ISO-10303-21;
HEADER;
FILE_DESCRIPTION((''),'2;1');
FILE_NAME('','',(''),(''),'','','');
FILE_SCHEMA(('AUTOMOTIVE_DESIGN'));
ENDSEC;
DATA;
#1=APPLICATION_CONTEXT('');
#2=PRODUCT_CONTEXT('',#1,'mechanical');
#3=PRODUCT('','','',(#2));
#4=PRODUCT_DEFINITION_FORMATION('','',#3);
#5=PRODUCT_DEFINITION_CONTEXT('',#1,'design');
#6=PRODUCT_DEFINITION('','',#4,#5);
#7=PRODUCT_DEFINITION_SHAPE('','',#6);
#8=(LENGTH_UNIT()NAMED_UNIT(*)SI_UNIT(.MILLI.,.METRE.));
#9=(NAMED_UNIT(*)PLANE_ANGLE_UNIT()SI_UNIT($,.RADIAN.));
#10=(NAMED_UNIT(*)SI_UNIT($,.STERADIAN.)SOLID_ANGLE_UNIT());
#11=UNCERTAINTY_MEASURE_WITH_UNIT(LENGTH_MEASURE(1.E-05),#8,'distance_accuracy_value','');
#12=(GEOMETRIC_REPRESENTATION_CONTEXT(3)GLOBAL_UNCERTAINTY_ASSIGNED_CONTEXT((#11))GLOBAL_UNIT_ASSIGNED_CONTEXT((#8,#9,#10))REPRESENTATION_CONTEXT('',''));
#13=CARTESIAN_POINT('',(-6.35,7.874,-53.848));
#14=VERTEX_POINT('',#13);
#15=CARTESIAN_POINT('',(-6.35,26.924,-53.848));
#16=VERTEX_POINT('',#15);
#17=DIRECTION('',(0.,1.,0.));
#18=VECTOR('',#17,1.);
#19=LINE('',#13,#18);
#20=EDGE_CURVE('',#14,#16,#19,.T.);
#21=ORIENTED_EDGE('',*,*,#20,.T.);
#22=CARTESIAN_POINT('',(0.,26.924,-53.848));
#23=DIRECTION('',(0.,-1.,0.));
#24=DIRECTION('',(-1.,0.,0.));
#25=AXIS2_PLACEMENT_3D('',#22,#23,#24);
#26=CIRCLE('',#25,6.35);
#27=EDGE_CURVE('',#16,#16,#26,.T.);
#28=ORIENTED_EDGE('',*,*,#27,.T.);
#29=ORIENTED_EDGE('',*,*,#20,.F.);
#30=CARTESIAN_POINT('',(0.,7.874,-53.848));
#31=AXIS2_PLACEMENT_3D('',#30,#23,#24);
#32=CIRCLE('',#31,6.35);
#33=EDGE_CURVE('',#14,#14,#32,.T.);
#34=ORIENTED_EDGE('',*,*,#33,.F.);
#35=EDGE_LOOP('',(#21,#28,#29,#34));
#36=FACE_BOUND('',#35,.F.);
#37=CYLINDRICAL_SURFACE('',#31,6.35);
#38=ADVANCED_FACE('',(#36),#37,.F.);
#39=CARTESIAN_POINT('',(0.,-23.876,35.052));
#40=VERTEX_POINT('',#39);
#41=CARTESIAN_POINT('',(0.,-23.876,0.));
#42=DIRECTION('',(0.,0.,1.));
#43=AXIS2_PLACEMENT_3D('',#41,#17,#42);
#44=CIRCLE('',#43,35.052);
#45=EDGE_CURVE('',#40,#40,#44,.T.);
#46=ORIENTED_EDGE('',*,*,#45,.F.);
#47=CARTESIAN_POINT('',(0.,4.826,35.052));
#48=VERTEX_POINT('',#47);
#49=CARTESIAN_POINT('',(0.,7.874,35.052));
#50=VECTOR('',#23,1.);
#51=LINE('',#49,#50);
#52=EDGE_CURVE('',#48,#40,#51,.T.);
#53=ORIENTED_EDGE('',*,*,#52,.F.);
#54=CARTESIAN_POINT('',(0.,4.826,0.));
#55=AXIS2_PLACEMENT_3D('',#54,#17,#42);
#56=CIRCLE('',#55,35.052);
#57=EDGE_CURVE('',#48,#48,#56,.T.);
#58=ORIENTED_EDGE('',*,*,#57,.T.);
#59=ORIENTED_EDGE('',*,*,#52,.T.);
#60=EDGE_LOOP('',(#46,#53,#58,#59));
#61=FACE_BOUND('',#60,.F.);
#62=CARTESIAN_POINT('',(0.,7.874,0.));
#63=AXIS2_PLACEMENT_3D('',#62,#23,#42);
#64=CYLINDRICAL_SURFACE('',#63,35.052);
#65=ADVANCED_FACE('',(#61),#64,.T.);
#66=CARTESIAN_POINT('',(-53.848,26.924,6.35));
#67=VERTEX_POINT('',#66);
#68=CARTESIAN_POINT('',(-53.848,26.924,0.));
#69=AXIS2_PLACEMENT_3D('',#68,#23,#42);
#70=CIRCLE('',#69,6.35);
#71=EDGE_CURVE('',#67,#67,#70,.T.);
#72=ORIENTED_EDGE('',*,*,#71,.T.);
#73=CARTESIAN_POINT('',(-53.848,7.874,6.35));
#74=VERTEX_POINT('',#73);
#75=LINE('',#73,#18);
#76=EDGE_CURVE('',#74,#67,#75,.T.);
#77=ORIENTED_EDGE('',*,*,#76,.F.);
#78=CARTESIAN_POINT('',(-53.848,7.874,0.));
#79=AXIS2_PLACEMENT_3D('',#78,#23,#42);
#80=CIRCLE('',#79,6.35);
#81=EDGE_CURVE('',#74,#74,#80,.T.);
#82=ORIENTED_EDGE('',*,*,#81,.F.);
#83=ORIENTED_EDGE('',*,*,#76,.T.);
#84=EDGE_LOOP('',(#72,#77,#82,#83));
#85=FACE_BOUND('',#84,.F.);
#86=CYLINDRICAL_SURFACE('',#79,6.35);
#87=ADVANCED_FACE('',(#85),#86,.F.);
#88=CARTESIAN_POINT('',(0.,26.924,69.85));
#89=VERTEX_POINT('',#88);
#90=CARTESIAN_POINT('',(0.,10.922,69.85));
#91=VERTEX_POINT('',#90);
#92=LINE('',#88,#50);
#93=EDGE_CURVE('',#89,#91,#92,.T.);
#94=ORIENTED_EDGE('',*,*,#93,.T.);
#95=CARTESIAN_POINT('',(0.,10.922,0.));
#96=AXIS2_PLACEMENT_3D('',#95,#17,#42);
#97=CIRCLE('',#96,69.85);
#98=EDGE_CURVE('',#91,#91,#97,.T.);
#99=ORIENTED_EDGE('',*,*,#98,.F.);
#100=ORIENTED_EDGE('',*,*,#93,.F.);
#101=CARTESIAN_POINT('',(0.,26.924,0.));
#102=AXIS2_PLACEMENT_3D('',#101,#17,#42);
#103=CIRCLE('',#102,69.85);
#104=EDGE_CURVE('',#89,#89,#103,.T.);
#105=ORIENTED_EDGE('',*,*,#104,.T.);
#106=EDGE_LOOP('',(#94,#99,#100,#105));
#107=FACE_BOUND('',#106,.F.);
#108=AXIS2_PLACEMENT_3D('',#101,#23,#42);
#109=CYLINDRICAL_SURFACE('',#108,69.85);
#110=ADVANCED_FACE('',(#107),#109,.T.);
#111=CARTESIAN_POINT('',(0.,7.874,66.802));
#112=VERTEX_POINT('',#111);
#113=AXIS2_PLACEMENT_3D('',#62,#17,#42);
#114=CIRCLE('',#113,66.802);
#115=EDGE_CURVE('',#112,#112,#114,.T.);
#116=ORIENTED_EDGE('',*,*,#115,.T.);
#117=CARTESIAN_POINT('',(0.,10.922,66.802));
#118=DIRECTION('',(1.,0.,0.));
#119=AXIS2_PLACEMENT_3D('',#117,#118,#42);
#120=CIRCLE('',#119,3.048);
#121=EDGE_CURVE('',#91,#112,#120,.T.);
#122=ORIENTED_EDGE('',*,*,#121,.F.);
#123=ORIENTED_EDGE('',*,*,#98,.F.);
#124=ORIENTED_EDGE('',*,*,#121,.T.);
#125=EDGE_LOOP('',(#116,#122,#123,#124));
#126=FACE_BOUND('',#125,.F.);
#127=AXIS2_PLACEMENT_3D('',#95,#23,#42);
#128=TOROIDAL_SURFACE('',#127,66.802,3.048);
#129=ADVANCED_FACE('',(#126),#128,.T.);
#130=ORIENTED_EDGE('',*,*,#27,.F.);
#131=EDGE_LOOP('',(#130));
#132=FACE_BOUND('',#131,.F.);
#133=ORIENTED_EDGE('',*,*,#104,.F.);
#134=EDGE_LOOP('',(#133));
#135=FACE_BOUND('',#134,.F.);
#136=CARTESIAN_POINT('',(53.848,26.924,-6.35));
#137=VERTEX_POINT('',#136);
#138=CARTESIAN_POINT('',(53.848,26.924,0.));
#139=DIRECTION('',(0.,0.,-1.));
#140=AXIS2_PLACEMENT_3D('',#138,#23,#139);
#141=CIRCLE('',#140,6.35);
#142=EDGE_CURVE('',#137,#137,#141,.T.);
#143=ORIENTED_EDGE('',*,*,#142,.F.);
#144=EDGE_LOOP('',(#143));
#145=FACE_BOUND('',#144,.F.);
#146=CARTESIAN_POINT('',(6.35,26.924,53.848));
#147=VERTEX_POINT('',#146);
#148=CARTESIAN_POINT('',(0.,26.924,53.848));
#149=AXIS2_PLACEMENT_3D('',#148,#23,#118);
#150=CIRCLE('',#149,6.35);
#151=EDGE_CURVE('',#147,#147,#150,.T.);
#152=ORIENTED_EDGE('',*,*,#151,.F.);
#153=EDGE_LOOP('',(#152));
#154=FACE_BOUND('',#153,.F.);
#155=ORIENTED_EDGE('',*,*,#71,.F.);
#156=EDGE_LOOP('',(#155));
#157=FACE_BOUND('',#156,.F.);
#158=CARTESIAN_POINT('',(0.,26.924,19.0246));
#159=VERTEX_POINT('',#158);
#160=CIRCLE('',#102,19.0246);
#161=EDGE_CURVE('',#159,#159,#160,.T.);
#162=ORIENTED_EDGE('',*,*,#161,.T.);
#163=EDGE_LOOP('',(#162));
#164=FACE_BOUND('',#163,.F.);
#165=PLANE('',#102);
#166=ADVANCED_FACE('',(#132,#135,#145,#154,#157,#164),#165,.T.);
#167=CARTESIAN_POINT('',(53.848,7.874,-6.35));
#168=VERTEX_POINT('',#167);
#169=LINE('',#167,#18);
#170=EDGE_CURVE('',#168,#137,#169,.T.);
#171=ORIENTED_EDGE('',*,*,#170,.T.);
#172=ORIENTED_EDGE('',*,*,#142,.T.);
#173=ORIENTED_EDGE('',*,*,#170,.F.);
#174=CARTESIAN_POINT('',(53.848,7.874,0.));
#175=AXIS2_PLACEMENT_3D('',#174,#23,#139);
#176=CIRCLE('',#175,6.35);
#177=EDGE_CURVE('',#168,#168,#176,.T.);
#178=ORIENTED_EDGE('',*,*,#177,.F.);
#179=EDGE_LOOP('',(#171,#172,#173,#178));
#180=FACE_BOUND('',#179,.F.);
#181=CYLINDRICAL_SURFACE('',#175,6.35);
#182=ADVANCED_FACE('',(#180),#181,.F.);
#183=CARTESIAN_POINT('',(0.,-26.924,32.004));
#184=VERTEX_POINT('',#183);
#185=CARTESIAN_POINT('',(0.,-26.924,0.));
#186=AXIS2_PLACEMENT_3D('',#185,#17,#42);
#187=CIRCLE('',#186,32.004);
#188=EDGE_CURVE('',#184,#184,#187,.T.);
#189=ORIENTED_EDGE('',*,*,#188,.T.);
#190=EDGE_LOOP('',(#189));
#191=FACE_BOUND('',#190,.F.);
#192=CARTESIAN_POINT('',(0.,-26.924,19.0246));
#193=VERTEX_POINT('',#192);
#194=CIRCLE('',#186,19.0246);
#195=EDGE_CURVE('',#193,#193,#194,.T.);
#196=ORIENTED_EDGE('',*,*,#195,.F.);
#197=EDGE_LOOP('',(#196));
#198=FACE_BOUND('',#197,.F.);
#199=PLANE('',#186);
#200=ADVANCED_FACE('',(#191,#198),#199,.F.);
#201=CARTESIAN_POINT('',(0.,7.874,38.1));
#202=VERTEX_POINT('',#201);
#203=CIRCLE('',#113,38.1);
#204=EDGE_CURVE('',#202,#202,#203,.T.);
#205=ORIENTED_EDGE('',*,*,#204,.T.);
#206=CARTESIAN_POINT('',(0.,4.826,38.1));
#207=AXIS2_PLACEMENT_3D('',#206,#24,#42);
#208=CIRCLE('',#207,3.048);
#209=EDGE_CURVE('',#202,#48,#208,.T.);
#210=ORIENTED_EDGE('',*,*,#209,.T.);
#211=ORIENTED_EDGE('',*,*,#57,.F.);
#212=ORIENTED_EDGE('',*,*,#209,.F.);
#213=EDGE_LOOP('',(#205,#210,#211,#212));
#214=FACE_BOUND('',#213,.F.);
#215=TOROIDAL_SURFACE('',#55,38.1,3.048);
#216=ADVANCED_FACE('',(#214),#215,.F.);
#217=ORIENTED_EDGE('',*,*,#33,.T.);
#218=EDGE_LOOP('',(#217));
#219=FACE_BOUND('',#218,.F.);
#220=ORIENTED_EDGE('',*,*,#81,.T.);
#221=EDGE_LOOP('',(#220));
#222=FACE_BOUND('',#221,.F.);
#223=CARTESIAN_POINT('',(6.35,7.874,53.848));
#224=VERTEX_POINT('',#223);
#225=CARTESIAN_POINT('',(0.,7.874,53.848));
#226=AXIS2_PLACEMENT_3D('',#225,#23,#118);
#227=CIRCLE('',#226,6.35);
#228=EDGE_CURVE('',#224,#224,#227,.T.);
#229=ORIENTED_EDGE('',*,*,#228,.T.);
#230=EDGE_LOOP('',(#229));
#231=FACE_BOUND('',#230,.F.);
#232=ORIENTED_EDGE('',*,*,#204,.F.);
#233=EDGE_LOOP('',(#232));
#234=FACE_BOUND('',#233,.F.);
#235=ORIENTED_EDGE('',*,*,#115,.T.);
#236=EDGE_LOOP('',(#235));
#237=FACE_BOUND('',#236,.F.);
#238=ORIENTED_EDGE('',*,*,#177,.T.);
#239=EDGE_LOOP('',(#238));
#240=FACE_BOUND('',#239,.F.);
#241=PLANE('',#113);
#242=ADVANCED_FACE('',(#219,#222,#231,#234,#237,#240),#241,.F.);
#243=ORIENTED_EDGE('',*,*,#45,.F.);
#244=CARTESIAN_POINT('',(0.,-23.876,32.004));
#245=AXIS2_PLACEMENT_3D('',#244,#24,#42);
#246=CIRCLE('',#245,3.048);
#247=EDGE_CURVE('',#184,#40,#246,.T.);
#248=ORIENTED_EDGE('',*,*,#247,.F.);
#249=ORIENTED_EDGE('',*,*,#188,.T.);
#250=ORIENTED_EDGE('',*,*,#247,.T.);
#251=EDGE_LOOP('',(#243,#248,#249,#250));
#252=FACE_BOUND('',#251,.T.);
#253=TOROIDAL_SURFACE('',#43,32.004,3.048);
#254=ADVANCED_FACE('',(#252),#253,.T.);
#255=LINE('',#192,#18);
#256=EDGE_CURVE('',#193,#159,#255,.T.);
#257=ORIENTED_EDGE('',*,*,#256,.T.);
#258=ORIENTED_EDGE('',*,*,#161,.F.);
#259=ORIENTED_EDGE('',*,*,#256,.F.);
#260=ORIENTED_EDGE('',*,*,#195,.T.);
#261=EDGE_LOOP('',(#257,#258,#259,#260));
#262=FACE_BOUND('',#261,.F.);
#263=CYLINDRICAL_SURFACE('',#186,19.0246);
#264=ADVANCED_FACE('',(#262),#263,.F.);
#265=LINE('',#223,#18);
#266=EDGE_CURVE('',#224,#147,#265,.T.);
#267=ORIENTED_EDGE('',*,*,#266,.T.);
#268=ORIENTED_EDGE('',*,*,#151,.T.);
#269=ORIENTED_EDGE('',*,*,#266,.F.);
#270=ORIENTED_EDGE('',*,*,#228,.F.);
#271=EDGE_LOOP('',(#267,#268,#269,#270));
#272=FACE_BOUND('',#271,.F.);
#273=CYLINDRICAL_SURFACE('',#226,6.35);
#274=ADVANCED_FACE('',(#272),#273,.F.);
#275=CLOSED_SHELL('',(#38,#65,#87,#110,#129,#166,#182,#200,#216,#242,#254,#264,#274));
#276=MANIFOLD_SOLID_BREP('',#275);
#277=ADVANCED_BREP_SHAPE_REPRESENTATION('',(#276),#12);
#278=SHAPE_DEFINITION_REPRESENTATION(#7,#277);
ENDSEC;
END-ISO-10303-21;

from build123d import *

# Parameters (mm, degrees)
F2_R            = 3.048
F3_R            = 6.35
F4_DEPTH        = 19.051
F4_COPIES_COUNT = 4


# Not quite as in the source:
# - a pattern or mirror of a feature is missing from the dataset's text; its kind, count and spacing are read off the source's solid


with BuildPart() as f1:
    # F0 (on Right) → F1 (revolve)
    with BuildSketch(Plane.YZ):
        Polygon((-26.924, 35.052), (-26.924, 19.0246), (26.924, 19.0246), (26.924, 69.85), (7.874, 69.85), (7.874, 35.052), align=None)
    revolve(axis=Axis((0, 0, 0), (0, 1, 0)))

    # F2
    f2_edges = [f1.edges().sort_by_distance(p)[0] for p in [
        (0, -26.924, -35.052),
        (0, 7.874, -69.85),
        (0, 7.874, -35.052),
    ]]
    fillet(f2_edges, radius=F2_R)

    # F3 (on face) → F4 (cut, through all)
    with BuildSketch(Plane.XZ.offset(-7.874)):
        with Locations((0, 53.848)):
            Circle(F3_R)
    f4 = extrude(amount=-F4_DEPTH, mode=Mode.SUBTRACT)

    # F4_copies: F4 ×4 about axis
    f4_copies_axis = Axis((0, 0, 0), (0, 1, 0))
    for i in range(1, F4_COPIES_COUNT):
        add(f4.rotate(f4_copies_axis, i * 360 / F4_COPIES_COUNT), mode=Mode.SUBTRACT)


solid = f1.part
